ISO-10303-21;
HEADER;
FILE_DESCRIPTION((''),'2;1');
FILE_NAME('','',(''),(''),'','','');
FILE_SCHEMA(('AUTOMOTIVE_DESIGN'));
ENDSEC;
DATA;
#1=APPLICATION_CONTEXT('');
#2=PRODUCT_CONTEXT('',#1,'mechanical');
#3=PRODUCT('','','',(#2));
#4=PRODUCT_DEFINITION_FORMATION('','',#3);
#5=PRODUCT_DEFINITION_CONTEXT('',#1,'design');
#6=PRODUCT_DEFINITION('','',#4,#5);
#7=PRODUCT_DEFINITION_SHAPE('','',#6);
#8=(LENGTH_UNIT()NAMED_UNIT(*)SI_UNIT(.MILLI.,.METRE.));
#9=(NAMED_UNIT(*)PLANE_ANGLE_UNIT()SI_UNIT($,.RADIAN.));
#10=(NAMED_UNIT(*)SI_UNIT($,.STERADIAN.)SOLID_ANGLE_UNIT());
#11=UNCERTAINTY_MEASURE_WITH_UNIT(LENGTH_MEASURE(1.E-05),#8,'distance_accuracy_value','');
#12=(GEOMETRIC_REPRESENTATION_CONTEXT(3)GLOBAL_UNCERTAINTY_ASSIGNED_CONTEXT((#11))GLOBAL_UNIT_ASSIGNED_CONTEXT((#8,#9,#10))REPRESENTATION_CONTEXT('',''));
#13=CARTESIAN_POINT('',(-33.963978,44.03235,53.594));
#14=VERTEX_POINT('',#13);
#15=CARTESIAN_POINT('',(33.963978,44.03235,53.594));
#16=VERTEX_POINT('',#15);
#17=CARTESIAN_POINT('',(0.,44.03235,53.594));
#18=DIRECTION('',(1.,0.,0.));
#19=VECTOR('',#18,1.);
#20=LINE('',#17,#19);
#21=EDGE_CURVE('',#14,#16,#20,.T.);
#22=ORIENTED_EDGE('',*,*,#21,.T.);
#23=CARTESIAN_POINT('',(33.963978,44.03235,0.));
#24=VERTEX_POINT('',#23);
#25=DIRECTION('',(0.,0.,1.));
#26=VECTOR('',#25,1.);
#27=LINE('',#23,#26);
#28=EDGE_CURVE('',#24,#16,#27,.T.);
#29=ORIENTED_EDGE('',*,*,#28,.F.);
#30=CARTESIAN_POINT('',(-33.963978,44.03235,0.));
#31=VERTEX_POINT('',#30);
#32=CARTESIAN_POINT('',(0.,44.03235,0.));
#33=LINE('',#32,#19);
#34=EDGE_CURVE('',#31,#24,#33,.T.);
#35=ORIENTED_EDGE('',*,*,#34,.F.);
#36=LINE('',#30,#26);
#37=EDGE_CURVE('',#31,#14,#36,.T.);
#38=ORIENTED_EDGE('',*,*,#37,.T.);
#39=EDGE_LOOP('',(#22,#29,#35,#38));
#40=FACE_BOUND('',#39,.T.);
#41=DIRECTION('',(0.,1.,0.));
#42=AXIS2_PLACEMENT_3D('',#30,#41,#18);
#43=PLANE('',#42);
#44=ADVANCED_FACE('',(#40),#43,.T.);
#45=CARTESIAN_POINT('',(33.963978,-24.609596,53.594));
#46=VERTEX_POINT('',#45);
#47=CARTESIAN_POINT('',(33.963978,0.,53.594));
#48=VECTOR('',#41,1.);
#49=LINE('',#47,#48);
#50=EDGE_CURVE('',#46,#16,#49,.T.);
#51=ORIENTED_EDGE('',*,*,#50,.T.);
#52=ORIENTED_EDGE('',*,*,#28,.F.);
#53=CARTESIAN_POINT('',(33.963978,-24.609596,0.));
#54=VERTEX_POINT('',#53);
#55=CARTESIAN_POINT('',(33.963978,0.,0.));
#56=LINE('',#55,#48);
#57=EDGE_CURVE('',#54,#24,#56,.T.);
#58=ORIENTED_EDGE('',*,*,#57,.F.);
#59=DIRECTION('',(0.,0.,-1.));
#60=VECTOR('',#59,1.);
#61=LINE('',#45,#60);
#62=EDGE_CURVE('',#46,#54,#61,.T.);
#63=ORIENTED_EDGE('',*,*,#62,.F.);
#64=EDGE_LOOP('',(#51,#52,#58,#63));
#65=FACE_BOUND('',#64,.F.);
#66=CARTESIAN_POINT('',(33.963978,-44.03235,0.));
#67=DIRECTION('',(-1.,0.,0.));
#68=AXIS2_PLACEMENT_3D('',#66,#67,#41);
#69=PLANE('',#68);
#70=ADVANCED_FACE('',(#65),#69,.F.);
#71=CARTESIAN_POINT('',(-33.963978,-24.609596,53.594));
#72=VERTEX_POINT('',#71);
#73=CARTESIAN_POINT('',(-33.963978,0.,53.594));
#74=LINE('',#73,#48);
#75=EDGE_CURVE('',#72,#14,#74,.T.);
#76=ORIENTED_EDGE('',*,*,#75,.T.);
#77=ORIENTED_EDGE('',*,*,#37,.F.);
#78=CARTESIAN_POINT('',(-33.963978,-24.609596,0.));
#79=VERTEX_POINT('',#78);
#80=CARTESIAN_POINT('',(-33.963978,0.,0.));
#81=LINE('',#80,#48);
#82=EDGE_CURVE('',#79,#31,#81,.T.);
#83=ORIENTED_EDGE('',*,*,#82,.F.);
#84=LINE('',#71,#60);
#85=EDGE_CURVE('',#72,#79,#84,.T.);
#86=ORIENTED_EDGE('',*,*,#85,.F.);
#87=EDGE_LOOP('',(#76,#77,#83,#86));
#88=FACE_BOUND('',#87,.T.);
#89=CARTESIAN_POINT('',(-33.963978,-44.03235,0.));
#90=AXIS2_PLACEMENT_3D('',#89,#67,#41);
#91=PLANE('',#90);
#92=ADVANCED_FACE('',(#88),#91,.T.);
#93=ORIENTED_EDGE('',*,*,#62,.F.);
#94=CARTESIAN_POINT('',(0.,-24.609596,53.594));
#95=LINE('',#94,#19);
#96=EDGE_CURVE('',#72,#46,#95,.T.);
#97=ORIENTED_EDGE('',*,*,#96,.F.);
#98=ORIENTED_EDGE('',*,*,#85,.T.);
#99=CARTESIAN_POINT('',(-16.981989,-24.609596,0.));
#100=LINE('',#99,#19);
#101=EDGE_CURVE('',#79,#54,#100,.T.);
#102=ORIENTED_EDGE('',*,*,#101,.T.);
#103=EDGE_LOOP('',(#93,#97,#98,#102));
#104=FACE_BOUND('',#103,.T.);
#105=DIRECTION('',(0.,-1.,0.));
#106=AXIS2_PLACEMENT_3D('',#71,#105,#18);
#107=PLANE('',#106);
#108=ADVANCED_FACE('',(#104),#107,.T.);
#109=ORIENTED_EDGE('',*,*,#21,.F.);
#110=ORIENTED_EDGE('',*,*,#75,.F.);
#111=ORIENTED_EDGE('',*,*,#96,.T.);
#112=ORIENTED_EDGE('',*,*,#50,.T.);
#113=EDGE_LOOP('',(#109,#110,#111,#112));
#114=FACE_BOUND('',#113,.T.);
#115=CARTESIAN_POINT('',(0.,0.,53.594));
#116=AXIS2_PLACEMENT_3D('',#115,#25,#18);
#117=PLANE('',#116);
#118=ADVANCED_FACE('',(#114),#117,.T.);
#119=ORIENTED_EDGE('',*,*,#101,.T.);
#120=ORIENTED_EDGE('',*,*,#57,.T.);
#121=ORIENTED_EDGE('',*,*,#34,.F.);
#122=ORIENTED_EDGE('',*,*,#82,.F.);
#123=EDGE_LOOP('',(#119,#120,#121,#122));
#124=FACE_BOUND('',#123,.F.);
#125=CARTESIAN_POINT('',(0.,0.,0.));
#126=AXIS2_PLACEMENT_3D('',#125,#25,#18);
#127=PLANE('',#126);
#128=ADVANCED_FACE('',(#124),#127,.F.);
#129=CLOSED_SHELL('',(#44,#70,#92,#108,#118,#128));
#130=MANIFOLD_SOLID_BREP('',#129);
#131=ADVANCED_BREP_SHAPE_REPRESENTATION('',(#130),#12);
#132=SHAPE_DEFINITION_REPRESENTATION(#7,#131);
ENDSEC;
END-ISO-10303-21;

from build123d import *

# Parameters (mm, degrees)
F0_W     = 67.9279565811
F0_H     = 88.0647003651
F1_DEPTH = 53.594
F2_W     = 67.9279565811
F2_H     = 19.4227546453
F3_DEPTH = 89.662


# Not quite as in the source:
# - a feature of the source that left no trace in its solid (it failed there, or was rolled back) is left out


with BuildPart() as f1:
    # F0 (on Top) → F1 (new body)
    with BuildSketch(Plane.XY):
        Rectangle(F0_W, F0_H)
    extrude(amount=F1_DEPTH)

    # F2 (on face) → F3 (cut)
    with BuildSketch(Plane.XY.offset(53.594)):
        with Locations((0, -34.3209728599)):
            Rectangle(F2_W, F2_H)
    extrude(amount=-F3_DEPTH, mode=Mode.SUBTRACT)


solid = f1.part
